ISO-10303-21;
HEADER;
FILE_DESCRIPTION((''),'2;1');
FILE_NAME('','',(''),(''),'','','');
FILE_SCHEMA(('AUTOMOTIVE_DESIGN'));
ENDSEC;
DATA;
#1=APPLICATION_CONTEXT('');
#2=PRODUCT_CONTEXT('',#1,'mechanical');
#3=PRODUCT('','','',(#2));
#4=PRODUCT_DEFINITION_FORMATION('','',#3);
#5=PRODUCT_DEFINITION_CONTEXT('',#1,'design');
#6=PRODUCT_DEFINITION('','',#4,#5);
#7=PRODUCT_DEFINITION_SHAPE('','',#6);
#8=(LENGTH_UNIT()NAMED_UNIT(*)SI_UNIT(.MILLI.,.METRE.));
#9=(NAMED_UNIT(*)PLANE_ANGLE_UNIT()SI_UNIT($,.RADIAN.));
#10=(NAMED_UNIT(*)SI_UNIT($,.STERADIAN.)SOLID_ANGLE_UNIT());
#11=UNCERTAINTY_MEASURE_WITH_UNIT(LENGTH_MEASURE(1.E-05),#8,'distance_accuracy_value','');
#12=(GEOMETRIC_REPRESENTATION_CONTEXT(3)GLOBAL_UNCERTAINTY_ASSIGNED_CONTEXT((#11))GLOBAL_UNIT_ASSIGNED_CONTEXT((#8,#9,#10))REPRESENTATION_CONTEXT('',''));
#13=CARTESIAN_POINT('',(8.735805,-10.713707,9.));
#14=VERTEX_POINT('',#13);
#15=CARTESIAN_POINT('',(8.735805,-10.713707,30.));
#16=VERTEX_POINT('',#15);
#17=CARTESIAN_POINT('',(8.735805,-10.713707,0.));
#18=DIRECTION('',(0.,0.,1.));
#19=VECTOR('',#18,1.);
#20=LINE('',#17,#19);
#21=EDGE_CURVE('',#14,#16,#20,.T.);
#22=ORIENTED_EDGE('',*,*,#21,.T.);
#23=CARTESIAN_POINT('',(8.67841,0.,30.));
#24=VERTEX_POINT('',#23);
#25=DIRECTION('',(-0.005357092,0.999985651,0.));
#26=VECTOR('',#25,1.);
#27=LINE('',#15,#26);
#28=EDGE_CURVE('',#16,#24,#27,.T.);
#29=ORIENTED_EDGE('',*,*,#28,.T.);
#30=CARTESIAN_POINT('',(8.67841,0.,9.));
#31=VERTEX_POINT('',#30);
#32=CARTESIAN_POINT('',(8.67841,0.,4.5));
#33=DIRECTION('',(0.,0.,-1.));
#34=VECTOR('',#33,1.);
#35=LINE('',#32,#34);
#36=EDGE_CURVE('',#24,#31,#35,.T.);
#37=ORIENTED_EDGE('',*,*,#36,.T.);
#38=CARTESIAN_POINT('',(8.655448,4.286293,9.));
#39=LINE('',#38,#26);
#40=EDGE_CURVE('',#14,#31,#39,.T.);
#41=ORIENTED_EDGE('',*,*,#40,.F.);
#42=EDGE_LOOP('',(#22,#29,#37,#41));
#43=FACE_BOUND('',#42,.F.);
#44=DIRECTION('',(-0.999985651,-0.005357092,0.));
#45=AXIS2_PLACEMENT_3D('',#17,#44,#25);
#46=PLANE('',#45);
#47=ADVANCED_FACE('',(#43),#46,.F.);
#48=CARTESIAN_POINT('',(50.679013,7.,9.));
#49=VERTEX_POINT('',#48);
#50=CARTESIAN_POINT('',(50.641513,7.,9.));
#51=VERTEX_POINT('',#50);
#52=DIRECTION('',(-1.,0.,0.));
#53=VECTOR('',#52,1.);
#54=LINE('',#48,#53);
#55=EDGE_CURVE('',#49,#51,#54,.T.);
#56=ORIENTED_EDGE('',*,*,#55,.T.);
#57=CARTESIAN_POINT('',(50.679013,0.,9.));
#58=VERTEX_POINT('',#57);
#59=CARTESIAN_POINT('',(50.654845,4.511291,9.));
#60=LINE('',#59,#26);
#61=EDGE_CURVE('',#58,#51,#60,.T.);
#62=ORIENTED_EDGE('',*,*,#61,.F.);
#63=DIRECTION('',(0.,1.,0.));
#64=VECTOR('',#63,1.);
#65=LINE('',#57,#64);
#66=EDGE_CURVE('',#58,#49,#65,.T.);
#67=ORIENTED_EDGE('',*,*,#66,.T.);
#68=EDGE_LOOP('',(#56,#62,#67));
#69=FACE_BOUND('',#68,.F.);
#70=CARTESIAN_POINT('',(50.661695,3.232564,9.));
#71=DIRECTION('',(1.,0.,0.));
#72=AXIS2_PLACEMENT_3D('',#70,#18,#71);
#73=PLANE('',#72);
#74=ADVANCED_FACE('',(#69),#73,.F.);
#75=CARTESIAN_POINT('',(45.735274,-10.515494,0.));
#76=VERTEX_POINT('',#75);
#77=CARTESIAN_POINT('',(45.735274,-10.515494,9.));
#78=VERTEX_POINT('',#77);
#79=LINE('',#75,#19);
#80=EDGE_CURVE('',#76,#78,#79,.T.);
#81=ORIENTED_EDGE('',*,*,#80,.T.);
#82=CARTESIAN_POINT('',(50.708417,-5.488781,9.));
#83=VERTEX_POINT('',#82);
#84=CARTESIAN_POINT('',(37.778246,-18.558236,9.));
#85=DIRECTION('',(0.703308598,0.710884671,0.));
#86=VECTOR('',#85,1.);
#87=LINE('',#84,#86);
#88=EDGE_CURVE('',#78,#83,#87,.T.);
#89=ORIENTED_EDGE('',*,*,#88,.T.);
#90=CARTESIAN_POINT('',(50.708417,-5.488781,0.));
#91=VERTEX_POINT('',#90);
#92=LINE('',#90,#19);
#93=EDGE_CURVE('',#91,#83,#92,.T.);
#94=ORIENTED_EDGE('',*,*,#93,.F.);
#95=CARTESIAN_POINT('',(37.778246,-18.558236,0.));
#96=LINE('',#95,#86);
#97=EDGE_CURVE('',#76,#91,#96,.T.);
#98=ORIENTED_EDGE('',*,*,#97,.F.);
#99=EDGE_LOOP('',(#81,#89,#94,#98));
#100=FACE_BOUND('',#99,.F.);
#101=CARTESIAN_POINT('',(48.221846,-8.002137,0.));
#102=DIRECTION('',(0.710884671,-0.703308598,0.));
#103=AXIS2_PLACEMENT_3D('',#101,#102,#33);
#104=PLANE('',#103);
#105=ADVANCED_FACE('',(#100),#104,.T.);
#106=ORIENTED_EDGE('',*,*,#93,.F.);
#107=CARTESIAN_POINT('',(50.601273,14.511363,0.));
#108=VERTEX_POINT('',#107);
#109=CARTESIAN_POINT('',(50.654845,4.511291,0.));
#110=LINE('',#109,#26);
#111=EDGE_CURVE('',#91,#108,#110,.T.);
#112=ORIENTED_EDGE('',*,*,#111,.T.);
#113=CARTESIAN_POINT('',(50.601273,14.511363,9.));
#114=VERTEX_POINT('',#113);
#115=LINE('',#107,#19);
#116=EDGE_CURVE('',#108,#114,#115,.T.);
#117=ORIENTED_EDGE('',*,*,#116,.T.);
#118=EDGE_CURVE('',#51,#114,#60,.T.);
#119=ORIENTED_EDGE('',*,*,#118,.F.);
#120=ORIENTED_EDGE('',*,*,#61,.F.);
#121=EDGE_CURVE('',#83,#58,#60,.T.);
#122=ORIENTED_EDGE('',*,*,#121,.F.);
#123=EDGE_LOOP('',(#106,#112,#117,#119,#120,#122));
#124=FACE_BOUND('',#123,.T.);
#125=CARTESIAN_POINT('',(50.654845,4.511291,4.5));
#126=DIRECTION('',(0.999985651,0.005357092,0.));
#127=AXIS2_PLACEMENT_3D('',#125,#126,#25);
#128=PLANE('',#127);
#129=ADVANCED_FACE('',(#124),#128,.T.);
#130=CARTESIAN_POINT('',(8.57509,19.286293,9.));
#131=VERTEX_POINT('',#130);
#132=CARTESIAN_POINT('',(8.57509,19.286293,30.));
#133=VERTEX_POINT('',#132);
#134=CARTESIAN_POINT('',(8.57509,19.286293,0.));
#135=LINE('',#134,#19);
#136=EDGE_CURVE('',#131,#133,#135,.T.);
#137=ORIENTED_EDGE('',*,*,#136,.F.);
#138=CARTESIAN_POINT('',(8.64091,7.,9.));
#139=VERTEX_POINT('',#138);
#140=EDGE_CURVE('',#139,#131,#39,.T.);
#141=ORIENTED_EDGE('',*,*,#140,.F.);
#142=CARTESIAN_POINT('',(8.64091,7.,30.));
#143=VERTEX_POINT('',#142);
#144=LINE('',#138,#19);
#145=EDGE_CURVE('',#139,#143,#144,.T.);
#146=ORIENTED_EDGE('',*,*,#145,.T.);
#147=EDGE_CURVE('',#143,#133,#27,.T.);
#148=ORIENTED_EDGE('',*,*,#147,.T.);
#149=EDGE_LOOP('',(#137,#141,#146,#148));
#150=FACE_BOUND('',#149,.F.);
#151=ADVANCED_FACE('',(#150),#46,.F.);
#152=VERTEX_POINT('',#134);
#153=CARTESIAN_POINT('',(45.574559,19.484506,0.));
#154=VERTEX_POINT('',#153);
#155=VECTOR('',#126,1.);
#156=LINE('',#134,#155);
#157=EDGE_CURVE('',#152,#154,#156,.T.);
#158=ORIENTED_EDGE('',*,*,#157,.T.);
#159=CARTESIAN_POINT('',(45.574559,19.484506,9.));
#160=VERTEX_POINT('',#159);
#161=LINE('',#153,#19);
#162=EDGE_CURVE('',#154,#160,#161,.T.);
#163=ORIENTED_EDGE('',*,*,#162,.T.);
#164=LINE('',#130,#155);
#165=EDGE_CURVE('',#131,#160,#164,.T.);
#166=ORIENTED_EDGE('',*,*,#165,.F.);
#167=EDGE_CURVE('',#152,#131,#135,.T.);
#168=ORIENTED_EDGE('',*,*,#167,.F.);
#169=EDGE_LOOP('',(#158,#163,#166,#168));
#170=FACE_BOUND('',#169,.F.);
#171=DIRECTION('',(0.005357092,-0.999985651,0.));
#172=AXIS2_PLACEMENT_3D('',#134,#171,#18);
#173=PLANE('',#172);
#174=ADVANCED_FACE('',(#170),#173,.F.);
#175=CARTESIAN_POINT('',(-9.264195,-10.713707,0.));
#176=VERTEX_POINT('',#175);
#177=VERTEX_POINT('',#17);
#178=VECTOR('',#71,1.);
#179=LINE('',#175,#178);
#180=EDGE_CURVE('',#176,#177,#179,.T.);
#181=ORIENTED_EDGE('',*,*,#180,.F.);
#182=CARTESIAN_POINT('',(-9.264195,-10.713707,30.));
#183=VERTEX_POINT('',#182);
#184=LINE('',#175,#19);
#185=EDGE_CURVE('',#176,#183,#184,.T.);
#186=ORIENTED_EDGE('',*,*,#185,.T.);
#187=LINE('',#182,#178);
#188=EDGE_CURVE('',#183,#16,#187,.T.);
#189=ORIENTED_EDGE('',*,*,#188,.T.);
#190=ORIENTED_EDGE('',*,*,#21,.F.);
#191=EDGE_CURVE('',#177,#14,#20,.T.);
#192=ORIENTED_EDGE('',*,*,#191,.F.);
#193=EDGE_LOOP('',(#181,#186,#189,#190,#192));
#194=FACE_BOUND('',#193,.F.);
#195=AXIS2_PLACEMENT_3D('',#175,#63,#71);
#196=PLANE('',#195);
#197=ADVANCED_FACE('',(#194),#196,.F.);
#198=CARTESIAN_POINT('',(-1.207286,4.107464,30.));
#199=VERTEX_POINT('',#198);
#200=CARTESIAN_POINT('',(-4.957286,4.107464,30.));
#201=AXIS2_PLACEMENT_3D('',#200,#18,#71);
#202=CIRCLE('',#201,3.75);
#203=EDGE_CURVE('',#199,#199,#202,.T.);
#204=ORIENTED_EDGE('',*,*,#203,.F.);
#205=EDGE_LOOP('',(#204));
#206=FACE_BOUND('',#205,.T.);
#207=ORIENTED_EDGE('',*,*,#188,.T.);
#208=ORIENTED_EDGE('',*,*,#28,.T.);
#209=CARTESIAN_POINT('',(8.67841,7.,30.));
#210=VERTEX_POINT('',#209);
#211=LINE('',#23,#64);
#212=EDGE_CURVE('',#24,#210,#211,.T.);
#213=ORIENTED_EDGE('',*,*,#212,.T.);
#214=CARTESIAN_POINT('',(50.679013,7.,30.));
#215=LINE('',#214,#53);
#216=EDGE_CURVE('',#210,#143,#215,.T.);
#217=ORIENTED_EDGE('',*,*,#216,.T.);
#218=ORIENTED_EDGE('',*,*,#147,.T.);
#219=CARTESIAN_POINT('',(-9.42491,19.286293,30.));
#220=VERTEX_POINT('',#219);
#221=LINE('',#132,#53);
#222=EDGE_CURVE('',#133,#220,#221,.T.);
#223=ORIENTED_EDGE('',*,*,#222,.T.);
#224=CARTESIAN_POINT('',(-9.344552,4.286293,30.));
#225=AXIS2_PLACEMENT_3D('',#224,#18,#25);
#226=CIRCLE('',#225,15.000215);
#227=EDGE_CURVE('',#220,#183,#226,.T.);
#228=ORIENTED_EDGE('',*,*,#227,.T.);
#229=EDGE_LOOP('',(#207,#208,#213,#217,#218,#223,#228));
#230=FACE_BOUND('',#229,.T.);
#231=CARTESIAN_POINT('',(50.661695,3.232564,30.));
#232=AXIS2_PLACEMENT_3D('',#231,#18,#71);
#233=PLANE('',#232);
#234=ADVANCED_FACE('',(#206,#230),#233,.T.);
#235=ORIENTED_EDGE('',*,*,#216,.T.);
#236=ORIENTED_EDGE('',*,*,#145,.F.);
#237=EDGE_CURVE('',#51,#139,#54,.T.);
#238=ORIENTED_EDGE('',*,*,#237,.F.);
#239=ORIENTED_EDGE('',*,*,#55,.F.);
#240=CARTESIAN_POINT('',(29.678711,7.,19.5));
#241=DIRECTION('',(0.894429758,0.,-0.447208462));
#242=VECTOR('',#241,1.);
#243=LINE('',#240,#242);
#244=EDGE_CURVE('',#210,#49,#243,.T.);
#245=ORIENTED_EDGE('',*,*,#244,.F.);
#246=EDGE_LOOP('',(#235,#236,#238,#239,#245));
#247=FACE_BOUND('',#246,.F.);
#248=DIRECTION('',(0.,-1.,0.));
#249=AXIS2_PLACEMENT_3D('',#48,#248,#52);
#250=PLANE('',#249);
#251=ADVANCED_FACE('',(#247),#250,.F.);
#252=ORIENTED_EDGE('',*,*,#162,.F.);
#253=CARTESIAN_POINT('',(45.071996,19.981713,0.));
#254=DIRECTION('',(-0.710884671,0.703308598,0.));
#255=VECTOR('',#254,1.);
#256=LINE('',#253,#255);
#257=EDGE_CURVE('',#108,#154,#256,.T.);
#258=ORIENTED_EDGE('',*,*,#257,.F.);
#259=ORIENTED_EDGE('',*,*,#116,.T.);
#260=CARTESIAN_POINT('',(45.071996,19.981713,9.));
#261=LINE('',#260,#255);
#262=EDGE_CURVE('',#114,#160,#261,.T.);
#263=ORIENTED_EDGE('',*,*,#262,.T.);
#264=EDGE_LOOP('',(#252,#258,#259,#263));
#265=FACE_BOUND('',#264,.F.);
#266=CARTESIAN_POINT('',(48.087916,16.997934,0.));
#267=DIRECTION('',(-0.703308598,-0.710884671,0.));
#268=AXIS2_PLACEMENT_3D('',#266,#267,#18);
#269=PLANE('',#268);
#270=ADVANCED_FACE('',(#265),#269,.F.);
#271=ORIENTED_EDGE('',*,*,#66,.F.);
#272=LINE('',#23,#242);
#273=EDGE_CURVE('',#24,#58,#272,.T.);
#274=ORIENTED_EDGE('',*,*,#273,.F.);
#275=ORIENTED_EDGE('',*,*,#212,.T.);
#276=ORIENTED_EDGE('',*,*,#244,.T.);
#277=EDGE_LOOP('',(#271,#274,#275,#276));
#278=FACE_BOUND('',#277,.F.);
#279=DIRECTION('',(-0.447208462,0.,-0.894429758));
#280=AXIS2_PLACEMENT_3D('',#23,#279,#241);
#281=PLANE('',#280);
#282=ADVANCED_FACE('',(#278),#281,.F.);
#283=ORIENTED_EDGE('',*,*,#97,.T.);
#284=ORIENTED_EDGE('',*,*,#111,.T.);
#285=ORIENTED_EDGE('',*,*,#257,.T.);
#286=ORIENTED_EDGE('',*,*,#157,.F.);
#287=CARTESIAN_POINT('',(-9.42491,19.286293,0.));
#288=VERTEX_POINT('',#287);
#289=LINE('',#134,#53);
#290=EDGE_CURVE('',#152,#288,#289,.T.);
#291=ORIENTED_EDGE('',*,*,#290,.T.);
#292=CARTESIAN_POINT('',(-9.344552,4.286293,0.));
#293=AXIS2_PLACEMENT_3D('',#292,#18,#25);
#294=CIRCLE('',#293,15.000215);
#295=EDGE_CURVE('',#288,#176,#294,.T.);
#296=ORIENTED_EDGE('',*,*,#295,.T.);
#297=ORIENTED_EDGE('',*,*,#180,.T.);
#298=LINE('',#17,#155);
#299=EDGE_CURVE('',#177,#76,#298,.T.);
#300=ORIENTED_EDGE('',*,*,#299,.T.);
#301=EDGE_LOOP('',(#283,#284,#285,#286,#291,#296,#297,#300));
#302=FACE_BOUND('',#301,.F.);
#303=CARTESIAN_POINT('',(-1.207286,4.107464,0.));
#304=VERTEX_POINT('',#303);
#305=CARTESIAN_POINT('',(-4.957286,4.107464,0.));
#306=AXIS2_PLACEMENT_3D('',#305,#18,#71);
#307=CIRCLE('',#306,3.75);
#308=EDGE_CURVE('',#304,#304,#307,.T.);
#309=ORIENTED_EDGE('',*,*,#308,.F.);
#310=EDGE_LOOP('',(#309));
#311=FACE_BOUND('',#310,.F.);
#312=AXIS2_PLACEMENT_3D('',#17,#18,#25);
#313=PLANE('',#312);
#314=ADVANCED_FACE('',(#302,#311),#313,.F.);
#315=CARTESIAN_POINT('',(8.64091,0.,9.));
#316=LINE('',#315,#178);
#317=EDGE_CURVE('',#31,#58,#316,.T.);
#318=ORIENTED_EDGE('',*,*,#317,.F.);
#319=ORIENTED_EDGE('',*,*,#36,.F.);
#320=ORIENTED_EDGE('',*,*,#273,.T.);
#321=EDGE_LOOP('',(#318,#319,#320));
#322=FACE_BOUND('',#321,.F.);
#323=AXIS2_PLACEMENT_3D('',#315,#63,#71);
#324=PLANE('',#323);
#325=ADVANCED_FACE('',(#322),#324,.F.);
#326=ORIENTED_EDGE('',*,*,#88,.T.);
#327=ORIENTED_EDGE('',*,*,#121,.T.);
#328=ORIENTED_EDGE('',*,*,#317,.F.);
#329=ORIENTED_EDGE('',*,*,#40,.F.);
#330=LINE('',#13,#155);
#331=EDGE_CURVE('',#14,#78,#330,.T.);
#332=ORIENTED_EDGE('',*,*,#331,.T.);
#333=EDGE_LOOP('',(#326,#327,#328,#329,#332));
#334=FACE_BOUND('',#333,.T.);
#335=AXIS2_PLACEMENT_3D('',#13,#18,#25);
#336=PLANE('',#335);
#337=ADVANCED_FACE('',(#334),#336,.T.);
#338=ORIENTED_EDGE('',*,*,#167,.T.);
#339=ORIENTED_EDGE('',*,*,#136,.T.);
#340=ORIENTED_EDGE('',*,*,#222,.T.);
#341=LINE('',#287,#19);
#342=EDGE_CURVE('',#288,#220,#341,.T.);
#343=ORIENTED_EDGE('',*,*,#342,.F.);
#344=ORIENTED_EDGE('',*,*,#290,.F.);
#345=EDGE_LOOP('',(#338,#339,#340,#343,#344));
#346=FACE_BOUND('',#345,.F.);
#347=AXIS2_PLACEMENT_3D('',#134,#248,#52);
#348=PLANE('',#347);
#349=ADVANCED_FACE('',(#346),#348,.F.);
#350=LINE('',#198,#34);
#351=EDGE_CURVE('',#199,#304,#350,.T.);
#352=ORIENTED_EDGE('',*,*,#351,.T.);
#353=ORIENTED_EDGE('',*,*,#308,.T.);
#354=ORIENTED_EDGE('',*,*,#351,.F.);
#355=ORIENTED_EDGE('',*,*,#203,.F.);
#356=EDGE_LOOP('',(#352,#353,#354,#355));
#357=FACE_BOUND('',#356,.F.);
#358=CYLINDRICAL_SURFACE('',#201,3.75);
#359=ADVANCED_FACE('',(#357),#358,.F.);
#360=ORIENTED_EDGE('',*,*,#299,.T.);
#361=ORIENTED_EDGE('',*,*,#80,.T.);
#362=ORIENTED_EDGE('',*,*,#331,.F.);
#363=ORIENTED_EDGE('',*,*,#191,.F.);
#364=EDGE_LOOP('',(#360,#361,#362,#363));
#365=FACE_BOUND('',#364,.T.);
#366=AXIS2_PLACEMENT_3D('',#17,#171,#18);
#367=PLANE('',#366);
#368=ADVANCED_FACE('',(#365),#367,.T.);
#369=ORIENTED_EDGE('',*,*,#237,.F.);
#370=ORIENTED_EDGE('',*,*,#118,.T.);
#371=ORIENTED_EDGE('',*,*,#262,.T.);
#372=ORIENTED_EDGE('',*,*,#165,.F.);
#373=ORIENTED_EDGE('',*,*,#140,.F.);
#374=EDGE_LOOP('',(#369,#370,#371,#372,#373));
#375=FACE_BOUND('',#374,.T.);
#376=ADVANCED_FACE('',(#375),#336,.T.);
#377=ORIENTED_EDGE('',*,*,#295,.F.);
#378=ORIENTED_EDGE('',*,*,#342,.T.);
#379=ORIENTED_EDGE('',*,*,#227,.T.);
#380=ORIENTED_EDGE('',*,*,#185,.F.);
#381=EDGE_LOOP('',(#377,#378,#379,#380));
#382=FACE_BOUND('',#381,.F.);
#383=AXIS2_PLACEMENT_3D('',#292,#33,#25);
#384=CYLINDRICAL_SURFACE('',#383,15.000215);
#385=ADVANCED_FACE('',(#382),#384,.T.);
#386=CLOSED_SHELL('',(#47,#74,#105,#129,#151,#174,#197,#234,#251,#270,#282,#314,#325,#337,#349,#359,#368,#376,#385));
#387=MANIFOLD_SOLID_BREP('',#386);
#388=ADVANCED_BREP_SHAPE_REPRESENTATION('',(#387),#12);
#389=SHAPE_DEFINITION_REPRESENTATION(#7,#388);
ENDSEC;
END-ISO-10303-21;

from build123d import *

# Parameters (mm, degrees)
F1_DEPTH  = 30
F2_R      = 3.75
F3_DEPTH  = 30
F4_W      = 30.0004304858
F4_H      = 9
F5_DEPTH  = 42
F6_SIZE   = 5
F7_W      = 0.0346347876
F7_H      = 6.4651286568
F8_DEPTH  = 21
F10_DEPTH = 25


with BuildPart() as f1:
    # F0 (on Top) → F1 (new body)
    with BuildSketch(Plane.XY):
        with BuildLine():
            Line((8.7358052025, -10.7137067538), (8.5750901289, 19.2862932462))
            Line((8.5750901289, 19.2862932462), (-9.4249098711, 19.2862932462))
            ThreePointArc((-9.4249098711, 19.2862932462), (-24.3445523343, 4.2059357094), (-9.2641947975, -10.7137067538))
            Line((-9.2641947975, -10.7137067538), (8.7358052025, -10.7137067538))
        make_face()
    extrude(amount=F1_DEPTH)

    # F2 (on face) → F3 (cut)
    with BuildSketch(Plane.XY.offset(30)):
        with Locations((-4.9572857097, 4.1074641049)):
            Circle(F2_R)
    extrude(amount=-F3_DEPTH, mode=Mode.SUBTRACT)

    # F4 (on face) → F5 (join)
    with BuildSketch(Plane(origin=(8.6781610067, 0.0464903762, 0), x_dir=(-0.0053570922, 0.9999856507, 0), z_dir=(0.9999856507, 0.0053570922, 0))):
        with Locations((4.2398637092, 4.5)):
            Rectangle(F4_W, F4_H)
    extrude(amount=F5_DEPTH)

    # F6
    f6_edges = [f1.edges().sort_by_distance(p)[0] for p in [
        (50.735203, -10.488709, 4.5),
        (50.574487, 19.511291, 4.5),
    ]]
    chamfer(f6_edges, length=F6_SIZE)

    # F7 (on face) → F8 (join)
    with BuildSketch(Plane.XY.offset(9)):
        with Locations((50.6616953499, 3.2325643284)):
            Rectangle(F7_W, F7_H)
        Polygon((8.6409098797, 0), (50.6443779561, 0), (50.6443779561, 6.4651286568), (50.6790127437, 6.4651286568), (50.6790127437, 7), (8.6409098797, 7), align=None)
    extrude(amount=F8_DEPTH)

    # F9 (on face) → F10 (cut)
    with BuildSketch(Plane.XZ):
        Polygon((50.6790127437, 30), (8.6784100635, 30), (50.6790127437, 9), align=None)
    extrude(amount=-F10_DEPTH, mode=Mode.SUBTRACT)


solid = f1.part
